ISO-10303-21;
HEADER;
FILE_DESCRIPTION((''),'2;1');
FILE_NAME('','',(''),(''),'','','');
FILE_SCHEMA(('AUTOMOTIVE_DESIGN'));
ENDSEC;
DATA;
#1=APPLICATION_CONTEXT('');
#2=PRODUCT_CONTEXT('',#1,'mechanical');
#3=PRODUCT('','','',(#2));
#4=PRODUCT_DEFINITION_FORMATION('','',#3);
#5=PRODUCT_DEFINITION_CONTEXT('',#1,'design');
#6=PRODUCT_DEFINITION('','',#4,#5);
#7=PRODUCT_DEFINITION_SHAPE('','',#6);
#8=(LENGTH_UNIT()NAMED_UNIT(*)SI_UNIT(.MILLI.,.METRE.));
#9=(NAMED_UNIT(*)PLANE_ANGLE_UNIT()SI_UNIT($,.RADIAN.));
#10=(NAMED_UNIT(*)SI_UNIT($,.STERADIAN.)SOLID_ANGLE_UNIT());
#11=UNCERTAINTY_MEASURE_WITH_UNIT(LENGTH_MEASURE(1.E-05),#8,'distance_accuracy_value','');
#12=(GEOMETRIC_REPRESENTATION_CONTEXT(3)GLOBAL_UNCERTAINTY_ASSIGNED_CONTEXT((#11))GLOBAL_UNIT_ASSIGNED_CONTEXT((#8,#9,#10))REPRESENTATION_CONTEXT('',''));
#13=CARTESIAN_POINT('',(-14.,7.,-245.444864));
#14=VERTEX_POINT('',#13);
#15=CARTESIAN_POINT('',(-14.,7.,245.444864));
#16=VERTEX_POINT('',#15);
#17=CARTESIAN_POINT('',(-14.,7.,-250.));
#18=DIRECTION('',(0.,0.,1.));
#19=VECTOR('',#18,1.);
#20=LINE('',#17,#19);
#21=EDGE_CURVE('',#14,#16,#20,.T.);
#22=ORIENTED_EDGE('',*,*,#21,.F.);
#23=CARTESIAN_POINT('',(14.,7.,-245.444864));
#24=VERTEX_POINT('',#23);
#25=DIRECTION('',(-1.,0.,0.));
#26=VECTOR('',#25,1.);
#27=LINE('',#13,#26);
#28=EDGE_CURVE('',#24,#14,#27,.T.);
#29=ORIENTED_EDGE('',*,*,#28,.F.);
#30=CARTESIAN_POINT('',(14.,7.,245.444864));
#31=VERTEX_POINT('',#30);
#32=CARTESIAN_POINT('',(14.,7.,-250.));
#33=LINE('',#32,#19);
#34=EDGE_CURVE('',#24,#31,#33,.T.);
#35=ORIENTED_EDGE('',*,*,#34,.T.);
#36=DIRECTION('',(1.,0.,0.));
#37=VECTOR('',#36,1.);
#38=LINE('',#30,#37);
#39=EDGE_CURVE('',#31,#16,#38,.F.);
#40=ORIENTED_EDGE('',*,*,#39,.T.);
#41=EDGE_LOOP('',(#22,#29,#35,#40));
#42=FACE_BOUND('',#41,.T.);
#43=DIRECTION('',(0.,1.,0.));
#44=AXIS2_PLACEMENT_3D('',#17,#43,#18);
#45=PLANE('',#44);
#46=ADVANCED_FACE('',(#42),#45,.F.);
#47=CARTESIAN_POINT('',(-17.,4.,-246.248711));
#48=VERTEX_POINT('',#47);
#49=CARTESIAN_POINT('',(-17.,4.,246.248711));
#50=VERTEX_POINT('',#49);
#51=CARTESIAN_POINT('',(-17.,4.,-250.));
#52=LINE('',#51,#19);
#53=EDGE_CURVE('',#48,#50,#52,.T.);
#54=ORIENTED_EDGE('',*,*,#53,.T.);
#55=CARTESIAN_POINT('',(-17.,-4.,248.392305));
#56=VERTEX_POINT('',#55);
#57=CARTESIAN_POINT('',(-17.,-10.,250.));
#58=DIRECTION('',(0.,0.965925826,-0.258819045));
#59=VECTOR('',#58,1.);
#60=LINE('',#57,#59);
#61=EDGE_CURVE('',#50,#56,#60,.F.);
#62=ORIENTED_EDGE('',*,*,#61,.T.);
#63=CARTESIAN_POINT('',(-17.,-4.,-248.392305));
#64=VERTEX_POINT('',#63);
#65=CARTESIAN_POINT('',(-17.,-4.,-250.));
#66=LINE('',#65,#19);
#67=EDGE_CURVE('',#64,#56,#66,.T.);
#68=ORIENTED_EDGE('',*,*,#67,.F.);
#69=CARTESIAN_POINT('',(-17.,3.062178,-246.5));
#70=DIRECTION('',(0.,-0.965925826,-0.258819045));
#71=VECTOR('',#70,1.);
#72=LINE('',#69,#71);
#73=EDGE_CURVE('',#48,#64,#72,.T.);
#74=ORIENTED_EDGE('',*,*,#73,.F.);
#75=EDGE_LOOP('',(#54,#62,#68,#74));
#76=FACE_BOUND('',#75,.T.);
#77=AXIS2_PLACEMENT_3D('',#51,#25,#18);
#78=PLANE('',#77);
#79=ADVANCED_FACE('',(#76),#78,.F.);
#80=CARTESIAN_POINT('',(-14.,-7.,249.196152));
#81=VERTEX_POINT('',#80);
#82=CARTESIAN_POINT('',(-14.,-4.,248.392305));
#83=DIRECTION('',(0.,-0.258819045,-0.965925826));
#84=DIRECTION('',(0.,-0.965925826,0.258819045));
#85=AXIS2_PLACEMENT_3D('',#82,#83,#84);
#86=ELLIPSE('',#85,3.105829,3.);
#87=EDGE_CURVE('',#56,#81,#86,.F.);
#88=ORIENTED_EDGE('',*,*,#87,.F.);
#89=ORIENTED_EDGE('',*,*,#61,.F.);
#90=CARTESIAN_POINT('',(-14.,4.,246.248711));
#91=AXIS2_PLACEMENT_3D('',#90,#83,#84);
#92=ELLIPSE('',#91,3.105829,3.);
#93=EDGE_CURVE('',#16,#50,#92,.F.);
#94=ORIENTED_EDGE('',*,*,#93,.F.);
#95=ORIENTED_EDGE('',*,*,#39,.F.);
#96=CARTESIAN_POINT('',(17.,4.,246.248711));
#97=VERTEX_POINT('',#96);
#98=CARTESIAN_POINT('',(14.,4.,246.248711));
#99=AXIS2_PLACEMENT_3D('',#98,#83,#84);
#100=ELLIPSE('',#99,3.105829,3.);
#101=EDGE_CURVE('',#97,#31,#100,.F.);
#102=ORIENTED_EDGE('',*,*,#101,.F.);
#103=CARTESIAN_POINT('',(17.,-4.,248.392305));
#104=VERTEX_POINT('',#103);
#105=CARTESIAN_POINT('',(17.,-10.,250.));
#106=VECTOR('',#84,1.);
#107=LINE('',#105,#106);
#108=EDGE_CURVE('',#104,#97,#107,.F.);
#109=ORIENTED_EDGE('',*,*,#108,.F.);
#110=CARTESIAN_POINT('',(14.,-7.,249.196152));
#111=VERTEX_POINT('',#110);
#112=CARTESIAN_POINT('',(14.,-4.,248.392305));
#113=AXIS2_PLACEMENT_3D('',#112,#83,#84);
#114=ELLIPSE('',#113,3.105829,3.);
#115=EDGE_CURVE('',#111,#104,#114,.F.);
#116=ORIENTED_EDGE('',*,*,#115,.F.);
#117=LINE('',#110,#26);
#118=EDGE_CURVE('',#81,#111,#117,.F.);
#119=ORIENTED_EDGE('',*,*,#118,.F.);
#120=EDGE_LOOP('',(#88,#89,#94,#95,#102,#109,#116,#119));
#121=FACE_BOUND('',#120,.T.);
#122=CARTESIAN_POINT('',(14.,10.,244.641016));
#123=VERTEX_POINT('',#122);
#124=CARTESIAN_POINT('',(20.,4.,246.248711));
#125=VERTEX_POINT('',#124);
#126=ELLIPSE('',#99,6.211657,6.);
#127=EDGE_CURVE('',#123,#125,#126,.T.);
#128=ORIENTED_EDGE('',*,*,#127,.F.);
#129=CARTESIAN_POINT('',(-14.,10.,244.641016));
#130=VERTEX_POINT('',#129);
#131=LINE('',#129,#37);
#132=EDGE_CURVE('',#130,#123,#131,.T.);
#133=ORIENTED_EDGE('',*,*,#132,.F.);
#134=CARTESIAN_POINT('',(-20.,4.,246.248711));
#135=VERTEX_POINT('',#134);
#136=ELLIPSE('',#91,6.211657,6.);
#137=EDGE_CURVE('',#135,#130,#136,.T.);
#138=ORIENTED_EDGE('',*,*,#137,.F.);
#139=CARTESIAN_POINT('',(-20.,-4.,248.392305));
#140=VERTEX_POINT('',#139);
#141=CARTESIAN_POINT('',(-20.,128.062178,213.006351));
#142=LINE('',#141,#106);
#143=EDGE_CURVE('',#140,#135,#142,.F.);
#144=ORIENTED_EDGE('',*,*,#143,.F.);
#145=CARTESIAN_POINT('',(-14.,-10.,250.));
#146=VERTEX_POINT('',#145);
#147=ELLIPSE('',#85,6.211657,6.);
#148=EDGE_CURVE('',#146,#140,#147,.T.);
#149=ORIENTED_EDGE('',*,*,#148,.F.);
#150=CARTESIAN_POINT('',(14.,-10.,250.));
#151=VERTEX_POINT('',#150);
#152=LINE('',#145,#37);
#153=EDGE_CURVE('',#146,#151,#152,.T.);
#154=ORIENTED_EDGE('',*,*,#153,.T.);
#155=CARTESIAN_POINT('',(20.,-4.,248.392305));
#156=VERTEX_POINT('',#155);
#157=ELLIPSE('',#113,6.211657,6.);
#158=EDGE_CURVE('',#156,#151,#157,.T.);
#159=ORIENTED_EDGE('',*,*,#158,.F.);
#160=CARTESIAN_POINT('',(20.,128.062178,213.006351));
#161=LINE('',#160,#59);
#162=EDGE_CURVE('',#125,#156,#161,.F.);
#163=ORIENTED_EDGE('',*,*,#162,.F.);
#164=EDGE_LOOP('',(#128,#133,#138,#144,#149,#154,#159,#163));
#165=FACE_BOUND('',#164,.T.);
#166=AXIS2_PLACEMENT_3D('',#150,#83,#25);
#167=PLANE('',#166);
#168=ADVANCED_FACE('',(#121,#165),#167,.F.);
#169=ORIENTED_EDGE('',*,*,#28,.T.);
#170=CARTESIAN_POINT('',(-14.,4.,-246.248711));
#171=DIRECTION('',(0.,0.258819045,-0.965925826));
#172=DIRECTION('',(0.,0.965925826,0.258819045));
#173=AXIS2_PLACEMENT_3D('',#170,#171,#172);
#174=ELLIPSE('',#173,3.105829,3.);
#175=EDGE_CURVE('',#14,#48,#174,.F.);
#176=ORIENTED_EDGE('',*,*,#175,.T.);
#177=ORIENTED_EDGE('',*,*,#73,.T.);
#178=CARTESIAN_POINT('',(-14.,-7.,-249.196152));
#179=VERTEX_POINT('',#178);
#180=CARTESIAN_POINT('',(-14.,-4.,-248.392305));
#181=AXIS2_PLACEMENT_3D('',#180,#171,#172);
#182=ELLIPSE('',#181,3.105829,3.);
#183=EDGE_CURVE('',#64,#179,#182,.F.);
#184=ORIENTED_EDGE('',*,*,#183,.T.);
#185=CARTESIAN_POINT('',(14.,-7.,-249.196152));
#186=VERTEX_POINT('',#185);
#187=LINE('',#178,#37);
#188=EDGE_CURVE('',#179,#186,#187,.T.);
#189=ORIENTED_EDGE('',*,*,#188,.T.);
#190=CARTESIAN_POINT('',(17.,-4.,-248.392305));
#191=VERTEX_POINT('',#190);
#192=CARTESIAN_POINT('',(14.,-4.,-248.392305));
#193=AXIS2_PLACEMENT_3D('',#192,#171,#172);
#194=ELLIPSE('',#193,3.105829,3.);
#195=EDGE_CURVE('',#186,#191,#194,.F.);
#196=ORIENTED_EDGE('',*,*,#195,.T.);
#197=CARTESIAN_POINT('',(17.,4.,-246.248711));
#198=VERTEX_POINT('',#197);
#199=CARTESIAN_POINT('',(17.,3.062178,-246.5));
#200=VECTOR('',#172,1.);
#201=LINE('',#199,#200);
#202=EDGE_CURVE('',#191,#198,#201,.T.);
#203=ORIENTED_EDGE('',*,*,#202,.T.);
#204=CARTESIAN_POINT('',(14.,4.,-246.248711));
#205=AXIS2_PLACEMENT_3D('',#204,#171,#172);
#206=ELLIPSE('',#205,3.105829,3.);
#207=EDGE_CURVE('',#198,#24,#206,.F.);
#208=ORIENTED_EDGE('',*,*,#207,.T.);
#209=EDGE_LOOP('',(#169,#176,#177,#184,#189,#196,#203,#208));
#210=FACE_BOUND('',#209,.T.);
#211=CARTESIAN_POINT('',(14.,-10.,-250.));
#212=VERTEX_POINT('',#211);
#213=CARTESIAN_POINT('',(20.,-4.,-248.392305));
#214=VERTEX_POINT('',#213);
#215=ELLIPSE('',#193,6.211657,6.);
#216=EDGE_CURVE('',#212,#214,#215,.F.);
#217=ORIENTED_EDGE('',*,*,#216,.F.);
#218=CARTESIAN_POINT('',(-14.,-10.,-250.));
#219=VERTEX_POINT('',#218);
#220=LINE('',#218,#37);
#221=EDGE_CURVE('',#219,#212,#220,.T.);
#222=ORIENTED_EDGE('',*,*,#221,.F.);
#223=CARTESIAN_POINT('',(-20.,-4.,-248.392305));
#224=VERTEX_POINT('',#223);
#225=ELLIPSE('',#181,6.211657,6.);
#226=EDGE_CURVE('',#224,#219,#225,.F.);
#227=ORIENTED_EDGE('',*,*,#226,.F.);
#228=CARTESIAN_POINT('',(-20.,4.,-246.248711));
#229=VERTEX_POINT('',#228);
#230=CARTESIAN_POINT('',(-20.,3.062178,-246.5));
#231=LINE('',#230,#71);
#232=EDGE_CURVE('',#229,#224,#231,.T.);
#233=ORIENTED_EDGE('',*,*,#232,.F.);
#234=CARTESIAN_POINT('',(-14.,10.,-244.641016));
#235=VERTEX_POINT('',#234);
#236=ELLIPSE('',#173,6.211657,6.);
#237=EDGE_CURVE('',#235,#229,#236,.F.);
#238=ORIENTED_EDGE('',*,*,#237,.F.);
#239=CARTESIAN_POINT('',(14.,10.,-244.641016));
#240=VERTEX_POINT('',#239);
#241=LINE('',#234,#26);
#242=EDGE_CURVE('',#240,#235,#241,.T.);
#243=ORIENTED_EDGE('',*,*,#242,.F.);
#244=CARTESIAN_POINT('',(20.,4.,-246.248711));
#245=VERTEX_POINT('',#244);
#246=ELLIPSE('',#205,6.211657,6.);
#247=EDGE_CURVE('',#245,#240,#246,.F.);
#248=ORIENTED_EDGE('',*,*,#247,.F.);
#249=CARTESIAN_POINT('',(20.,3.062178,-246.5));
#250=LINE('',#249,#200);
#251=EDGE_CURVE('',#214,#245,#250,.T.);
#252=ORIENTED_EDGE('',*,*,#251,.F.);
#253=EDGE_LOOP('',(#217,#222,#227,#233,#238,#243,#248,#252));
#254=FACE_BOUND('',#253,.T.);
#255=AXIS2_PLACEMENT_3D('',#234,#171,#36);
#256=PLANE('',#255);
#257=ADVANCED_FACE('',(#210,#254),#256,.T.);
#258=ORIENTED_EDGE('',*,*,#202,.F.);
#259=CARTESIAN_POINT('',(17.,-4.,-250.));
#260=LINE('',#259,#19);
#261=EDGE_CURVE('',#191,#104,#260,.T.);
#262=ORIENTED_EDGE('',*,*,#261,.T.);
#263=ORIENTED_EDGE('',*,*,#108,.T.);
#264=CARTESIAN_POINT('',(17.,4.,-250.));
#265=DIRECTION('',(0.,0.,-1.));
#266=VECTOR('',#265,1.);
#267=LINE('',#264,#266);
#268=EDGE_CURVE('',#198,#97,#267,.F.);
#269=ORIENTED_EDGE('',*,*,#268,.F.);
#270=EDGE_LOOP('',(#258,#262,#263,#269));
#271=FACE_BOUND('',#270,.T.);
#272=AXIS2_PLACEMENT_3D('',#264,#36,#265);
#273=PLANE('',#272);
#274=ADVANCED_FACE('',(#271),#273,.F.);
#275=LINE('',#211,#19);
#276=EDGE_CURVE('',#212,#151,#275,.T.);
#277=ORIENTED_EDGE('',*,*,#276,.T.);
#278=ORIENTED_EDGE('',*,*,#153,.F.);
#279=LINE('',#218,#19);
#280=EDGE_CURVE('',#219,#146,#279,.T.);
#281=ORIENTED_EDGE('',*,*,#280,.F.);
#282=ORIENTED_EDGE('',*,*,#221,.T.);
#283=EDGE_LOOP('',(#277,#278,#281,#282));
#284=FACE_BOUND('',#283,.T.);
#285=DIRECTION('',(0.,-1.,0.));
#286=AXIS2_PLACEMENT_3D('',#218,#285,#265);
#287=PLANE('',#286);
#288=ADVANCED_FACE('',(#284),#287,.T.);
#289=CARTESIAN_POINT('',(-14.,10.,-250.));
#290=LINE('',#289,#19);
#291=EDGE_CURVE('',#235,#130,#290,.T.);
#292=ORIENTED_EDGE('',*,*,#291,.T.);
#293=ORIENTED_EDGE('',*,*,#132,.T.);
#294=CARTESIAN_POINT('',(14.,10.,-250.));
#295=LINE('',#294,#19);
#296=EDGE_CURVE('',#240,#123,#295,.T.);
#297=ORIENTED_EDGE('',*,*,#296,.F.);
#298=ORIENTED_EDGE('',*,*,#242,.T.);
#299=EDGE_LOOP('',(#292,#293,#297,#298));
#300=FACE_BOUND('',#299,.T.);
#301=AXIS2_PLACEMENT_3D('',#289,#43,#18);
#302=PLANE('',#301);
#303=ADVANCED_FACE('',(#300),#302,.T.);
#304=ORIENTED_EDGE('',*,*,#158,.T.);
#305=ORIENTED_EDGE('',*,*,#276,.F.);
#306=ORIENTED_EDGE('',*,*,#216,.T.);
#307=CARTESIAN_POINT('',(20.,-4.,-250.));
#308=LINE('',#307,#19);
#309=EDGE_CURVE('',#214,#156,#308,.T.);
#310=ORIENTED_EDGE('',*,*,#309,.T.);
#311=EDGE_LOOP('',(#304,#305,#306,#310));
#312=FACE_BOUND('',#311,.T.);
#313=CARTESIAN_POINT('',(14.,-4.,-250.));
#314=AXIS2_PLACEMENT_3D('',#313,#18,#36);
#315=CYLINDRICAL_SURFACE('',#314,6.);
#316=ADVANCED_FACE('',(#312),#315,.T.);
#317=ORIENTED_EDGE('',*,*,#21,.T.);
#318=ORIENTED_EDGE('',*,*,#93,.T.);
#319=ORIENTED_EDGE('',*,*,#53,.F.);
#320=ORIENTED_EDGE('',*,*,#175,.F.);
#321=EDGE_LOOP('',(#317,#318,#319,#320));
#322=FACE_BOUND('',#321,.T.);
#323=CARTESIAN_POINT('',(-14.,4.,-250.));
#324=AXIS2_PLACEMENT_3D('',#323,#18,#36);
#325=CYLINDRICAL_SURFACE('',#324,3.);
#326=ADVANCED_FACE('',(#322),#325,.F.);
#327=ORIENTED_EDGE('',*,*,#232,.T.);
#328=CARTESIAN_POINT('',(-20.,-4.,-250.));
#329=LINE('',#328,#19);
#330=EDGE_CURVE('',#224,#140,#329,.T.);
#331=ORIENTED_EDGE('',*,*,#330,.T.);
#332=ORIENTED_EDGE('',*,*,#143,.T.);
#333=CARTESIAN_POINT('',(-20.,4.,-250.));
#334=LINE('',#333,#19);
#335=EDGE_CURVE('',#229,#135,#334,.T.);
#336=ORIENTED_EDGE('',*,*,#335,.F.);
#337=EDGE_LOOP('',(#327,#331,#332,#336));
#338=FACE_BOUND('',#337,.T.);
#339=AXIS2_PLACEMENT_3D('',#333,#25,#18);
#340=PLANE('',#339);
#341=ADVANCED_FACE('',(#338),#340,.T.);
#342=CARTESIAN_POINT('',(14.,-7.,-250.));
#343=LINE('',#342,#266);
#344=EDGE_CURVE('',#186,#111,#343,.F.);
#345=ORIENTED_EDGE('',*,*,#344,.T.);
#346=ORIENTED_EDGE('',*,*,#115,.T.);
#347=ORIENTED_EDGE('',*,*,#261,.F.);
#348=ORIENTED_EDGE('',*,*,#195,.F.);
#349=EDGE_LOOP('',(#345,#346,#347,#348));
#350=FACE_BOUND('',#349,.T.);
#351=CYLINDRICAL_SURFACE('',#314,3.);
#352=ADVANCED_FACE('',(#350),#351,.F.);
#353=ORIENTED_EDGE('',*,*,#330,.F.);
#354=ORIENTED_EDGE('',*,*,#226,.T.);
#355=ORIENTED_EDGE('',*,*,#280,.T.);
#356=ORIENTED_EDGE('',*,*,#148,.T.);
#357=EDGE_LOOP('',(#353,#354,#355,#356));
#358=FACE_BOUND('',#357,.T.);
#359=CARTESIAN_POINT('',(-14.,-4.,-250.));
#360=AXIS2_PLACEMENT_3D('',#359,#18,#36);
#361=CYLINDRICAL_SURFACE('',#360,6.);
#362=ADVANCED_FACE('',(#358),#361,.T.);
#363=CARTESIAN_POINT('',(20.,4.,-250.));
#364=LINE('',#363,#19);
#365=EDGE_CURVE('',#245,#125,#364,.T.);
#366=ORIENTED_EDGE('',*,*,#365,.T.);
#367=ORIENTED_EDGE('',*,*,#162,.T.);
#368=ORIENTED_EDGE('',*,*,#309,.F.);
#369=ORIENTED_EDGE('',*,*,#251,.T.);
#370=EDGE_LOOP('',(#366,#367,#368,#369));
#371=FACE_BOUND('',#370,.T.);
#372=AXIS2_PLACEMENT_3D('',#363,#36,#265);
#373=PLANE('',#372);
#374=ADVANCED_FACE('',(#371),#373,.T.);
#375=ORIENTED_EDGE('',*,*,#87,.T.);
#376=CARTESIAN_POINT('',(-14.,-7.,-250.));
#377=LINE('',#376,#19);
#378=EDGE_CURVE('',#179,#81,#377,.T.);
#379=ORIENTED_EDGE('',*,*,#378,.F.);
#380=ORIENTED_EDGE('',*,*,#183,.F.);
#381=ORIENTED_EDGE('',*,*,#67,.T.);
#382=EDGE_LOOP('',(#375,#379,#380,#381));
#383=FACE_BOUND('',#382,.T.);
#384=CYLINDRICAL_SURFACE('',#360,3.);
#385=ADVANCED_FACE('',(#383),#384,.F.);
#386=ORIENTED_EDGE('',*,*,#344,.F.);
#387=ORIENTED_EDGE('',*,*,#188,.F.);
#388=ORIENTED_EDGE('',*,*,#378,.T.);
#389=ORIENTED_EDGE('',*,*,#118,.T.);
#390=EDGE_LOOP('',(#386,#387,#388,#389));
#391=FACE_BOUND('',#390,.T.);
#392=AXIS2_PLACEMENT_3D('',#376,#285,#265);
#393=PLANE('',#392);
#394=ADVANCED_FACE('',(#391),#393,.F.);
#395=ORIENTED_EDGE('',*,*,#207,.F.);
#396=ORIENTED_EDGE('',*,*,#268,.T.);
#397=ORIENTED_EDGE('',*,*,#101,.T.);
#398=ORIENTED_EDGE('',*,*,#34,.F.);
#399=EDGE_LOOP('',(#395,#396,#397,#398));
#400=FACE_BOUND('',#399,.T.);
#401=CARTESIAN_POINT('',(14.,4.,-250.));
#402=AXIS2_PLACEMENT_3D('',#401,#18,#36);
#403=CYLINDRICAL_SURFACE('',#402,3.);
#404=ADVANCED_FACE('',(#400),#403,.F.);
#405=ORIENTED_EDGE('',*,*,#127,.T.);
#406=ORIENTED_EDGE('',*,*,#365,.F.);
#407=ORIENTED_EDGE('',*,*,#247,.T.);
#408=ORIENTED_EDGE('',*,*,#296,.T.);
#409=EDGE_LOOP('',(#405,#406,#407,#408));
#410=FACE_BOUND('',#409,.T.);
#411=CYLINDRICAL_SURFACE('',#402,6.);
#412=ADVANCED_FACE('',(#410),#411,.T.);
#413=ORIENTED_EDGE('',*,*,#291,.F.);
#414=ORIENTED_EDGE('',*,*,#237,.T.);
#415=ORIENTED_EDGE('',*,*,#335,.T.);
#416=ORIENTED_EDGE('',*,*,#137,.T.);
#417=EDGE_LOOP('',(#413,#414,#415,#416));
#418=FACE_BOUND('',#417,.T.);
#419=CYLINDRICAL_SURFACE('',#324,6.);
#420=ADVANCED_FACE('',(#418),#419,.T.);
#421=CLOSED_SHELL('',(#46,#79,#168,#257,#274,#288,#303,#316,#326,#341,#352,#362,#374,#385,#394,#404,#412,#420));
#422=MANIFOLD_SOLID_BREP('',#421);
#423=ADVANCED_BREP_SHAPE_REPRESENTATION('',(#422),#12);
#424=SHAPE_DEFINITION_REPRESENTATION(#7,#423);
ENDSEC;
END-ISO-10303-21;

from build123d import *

# Parameters (mm, degrees)
EXTRUDE_1_DEPTH      = 250
EXTRUDE_1_DEPTH_BACK = 250
SHELL_1_T            = -3
CHAMFER_1_SIZE       = 5.358983849
CHAMFER_1_SIZE_2     = 20


with BuildPart() as part:
    # Эскиз1 → Бобышка-Вытянуть1 (new, two sides: drawn at the far end of the back side and taken through both)
    with BuildSketch(Plane.XY.offset(-EXTRUDE_1_DEPTH_BACK)):
        with BuildLine():
            Line((-14, 10), (14, 10))
            ThreePointArc((14, 10), (18.242640687, 8.242640687), (20, 4))
            Line((20, 4), (20, -4))
            ThreePointArc((20, -4), (18.242640687, -8.242640687), (14, -10))
            Line((14, -10), (-14, -10))
            ThreePointArc((-14, -10), (-18.242640687, -8.242640687), (-20, -4))
            Line((-20, -4), (-20, 4))
            ThreePointArc((-20, 4), (-18.242640687, 8.242640687), (-14, 10))
        make_face()
    extrude(amount=EXTRUDE_1_DEPTH + EXTRUDE_1_DEPTH_BACK)

    # Оболочка1
    shell_1_openings = [part.faces().sort_by_distance(p)[0] for p in [
        (0, 0, -250),
        (0, 0, 250),
    ]]
    offset(amount=SHELL_1_T, openings=shell_1_openings, kind=Kind.INTERSECTION)

    # Фаска1
    # the kernel refuses this chamfer: 20, 5.358983849 mm, written as the material it takes off along each edge
    with BuildSketch(Plane(origin=(-65.934431404, 10, -250), x_dir=(0, 0.1375124470212891, 0.9905000388259543), z_dir=(1, 0, 0))) as chamfer_1_piece_1:
        Polygon((CHAMFER_1_SIZE * 0.990500038756, CHAMFER_1_SIZE * 0.137512447012), (-CHAMFER_1_SIZE_2 * 0.137512447021, CHAMFER_1_SIZE_2 * 0.990500038826), (0, 0), align=None)
    extrude(amount=131.868862808, mode=Mode.SUBTRACT)
    with BuildSketch(Plane(origin=(-65.934431404, 10, 250), x_dir=(0, 0.1375124470212891, -0.9905000388259543), z_dir=(1, 0, 0))) as chamfer_1_piece_2:
        Polygon((CHAMFER_1_SIZE * 0.990500038756, -CHAMFER_1_SIZE * 0.137512447012), (-CHAMFER_1_SIZE_2 * 0.137512447021, -CHAMFER_1_SIZE_2 * 0.990500038826), (0, 0), align=None)
    extrude(amount=131.868862808, mode=Mode.SUBTRACT)


solid = part.part
